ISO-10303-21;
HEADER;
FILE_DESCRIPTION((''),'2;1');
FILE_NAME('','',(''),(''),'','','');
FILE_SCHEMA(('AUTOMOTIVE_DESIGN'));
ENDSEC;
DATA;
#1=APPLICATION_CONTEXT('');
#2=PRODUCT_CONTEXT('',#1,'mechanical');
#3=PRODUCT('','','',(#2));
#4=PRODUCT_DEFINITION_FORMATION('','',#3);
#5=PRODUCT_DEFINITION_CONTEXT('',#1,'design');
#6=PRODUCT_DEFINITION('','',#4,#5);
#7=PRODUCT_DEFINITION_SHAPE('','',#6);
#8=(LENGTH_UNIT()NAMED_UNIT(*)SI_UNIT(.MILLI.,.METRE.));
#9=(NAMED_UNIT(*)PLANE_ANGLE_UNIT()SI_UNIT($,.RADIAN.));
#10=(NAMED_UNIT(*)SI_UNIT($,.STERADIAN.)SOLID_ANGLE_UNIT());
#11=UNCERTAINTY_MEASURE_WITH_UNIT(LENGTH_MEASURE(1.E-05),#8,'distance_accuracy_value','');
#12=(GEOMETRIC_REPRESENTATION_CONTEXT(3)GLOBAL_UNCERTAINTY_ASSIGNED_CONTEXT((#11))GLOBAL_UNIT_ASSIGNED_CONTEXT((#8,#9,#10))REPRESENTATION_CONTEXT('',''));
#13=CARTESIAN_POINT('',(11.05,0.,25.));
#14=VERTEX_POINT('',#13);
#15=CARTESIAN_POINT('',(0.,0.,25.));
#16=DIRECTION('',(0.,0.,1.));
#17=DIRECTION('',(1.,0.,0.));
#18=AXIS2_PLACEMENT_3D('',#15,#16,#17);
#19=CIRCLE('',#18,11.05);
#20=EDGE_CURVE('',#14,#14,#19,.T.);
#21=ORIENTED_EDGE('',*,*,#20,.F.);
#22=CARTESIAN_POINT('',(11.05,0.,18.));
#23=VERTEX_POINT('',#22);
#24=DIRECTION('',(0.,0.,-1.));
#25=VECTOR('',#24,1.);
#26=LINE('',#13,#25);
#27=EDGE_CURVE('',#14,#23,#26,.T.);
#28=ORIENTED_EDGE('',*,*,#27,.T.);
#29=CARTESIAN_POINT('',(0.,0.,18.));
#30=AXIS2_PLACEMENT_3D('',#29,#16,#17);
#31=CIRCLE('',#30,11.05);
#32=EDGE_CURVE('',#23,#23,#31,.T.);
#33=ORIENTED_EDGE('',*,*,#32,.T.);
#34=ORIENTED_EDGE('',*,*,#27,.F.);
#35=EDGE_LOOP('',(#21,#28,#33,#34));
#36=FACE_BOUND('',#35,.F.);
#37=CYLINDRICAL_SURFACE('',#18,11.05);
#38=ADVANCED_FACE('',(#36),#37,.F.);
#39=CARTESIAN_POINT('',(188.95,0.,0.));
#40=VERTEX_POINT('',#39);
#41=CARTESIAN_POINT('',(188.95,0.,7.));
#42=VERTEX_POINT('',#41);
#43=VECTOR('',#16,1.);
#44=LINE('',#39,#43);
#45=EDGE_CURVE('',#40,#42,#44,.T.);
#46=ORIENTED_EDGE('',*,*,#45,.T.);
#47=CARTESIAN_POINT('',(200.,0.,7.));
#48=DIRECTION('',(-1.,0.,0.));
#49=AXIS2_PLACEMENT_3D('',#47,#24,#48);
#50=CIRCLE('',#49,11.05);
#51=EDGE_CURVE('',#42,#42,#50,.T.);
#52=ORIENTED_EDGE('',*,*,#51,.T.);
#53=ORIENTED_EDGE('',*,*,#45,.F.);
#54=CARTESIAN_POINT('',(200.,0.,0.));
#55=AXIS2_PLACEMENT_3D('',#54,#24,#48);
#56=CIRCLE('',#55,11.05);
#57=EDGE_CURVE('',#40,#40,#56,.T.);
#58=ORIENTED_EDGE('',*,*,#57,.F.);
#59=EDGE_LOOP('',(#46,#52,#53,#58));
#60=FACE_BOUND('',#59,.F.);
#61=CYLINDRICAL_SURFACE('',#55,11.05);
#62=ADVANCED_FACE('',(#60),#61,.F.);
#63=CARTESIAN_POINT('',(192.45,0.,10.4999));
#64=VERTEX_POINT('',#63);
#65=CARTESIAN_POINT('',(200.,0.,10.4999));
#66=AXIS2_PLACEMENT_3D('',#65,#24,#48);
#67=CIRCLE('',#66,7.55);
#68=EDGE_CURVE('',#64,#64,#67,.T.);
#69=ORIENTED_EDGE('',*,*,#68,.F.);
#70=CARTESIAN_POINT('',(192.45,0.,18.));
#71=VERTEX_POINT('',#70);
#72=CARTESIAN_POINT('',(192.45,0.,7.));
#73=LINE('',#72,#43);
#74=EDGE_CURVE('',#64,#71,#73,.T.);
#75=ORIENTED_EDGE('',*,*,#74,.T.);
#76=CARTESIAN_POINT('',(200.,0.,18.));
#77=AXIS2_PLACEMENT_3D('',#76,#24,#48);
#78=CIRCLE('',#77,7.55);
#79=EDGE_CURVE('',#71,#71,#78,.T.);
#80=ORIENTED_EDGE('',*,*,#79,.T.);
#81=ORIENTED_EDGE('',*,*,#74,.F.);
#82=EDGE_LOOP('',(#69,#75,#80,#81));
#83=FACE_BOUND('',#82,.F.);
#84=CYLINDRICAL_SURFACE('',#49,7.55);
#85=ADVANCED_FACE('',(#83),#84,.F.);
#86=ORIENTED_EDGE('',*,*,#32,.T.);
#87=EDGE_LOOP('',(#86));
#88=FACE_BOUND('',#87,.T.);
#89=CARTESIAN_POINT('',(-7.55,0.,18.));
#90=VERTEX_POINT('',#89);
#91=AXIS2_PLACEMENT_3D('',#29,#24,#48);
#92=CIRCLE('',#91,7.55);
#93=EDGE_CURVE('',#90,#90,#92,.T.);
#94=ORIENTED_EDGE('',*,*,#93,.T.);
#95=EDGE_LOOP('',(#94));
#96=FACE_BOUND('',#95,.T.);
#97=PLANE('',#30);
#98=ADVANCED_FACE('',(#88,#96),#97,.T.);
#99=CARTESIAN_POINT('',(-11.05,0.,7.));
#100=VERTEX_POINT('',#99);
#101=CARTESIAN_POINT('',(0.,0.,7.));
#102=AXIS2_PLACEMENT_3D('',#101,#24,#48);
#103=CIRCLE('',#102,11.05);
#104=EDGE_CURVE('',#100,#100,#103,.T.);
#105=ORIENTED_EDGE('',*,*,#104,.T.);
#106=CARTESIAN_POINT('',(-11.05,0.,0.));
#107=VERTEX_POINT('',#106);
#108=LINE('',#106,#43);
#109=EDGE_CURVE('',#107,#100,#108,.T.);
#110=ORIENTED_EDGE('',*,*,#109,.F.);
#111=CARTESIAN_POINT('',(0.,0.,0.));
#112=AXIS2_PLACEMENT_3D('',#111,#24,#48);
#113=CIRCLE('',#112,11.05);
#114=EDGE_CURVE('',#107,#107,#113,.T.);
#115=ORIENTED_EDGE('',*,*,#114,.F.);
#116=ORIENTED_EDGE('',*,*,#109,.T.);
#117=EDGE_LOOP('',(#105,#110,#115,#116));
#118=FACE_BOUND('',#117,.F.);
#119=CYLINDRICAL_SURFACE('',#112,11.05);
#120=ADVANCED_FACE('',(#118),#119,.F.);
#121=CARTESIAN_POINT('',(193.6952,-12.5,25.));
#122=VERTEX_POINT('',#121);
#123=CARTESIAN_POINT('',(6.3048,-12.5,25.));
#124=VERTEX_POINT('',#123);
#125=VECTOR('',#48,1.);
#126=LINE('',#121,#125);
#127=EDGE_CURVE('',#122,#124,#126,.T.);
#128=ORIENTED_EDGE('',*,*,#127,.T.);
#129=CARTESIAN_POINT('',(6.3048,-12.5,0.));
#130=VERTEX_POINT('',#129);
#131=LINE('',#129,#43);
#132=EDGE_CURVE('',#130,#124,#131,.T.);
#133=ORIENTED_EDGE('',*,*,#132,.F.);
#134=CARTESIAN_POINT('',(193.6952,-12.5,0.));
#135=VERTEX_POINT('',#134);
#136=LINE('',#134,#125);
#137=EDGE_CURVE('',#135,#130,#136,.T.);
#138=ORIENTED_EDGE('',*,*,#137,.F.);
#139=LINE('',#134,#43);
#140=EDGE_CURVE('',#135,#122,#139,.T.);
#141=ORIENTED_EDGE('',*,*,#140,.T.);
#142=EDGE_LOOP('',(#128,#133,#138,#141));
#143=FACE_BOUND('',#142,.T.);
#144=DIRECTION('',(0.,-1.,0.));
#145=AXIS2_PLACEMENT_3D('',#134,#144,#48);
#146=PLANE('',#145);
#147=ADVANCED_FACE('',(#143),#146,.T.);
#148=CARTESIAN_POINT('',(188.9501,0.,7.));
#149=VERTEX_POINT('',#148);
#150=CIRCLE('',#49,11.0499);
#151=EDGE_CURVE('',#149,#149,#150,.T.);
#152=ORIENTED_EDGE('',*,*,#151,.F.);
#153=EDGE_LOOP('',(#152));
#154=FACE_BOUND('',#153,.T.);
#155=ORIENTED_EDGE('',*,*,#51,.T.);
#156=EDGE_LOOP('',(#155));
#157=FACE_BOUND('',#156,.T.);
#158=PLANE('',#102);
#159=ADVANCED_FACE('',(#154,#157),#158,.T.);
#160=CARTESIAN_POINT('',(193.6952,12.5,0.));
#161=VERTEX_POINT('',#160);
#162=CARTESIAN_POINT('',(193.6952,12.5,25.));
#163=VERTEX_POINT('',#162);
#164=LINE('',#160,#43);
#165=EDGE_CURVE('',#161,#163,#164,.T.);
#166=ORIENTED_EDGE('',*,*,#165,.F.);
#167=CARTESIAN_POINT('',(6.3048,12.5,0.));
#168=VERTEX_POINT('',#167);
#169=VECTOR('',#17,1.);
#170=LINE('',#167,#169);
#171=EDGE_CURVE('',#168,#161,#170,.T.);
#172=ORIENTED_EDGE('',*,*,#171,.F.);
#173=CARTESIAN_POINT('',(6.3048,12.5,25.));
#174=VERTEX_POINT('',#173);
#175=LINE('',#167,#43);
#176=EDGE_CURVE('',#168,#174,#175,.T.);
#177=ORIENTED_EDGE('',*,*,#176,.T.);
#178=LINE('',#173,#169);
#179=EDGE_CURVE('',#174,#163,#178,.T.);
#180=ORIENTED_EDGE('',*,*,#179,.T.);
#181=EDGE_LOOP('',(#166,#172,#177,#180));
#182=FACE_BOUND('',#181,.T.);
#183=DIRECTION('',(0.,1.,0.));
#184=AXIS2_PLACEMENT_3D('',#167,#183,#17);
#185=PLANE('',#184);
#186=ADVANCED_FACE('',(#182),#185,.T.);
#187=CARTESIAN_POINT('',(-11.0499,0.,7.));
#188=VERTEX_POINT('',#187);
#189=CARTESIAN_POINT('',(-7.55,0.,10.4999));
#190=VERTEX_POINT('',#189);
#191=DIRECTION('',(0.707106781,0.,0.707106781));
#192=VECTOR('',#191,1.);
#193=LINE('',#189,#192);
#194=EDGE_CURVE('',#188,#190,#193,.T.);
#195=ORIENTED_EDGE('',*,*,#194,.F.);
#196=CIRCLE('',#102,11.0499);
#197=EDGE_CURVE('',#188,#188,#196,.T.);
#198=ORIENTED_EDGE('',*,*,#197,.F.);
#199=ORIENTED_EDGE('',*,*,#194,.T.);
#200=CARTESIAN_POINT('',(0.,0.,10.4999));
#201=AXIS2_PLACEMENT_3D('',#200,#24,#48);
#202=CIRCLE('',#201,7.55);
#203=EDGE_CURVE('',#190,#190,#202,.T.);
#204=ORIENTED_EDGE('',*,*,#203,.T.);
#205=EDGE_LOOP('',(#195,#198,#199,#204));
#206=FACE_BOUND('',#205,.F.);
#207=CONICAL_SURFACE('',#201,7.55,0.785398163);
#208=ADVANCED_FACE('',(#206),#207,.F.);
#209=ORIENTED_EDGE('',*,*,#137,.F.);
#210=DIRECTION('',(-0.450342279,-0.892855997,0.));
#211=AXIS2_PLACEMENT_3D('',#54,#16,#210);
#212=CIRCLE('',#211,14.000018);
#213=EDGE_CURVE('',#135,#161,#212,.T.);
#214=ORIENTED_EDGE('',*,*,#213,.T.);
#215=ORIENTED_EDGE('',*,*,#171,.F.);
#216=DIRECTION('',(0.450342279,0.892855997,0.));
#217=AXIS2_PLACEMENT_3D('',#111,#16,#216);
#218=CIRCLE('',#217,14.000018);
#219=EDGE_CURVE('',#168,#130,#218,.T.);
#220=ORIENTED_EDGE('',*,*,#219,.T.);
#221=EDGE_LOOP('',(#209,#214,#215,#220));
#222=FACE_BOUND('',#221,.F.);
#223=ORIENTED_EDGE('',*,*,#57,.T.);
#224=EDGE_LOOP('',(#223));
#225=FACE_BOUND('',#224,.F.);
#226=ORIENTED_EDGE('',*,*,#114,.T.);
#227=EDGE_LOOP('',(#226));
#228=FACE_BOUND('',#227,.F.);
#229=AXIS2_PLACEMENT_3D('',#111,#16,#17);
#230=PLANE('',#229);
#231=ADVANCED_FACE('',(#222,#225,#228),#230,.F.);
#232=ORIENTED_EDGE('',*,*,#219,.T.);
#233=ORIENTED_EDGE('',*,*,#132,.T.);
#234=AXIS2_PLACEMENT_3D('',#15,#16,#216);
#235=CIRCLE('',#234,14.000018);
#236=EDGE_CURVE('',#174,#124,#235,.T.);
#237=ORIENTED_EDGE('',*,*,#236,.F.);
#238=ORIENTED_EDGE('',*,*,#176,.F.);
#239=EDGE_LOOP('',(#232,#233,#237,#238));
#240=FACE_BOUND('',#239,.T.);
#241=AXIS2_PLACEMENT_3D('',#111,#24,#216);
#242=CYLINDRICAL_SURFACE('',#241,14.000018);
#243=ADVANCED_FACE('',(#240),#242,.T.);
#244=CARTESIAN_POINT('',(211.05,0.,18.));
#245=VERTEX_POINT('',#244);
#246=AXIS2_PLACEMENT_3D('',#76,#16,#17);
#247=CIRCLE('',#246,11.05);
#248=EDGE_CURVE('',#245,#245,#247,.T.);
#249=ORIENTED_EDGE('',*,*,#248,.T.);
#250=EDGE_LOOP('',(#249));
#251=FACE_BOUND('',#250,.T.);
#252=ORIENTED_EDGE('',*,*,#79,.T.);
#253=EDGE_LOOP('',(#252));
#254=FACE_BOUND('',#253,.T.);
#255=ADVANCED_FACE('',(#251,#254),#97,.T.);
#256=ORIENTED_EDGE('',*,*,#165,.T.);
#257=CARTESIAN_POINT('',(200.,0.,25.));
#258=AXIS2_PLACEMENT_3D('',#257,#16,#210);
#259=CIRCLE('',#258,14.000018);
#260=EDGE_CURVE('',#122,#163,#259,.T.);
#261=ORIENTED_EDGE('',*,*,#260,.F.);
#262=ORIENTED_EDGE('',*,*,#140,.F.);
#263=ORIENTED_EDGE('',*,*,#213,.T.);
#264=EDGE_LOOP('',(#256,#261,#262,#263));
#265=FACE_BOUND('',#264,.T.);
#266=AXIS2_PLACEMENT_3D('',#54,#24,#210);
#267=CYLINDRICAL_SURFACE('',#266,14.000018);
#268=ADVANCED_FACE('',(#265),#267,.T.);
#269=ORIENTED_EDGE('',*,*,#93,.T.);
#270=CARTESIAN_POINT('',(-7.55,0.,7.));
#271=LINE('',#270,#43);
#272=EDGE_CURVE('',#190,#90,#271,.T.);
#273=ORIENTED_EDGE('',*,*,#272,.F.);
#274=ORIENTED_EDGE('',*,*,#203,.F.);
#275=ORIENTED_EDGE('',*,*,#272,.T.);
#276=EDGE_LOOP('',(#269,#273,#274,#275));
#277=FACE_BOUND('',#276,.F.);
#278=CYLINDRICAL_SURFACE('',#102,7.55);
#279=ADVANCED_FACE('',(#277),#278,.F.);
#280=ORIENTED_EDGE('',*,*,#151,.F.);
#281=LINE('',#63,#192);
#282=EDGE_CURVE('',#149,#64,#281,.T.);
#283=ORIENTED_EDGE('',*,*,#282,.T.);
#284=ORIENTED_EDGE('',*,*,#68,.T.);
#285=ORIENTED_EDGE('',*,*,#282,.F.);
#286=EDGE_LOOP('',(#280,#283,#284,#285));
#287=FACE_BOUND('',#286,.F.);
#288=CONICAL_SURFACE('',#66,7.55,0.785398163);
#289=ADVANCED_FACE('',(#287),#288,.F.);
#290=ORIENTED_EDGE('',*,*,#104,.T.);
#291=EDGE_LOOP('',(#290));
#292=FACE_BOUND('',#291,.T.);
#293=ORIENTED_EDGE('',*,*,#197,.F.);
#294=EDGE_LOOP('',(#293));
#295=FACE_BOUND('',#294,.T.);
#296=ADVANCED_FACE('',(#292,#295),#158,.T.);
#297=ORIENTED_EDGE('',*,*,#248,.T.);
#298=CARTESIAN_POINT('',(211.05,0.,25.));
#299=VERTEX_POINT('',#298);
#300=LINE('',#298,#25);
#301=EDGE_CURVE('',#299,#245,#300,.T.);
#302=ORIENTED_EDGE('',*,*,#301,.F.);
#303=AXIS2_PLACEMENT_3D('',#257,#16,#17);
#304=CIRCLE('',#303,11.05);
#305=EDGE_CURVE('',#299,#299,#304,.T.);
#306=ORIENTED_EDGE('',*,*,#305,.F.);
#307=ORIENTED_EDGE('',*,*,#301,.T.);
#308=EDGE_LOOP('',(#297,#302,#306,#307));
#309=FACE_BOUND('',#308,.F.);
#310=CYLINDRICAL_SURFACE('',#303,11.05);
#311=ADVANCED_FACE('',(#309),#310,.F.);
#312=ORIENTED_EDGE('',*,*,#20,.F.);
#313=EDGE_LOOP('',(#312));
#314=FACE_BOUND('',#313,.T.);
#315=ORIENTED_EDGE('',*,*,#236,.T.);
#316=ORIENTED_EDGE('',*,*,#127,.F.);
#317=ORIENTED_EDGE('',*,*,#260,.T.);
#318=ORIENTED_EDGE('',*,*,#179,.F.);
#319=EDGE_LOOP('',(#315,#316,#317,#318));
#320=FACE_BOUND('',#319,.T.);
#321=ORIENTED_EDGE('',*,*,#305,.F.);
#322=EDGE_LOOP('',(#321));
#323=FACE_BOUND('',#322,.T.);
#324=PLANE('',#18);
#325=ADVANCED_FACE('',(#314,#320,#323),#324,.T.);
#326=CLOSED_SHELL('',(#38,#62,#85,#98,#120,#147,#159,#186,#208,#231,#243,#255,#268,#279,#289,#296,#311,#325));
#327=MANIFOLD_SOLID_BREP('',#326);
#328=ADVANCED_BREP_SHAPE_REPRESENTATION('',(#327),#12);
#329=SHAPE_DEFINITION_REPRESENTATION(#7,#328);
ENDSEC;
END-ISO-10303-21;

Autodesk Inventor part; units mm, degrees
ref_plane "YZ Plane" through (0, 0, 0) normal (1, 0, 0) x (0, 1, 0)
ref_plane "XZ Plane" through (0, 0, 0) normal (0, 1, 0) x (-1, 0, 0)
ref_plane "XY Plane" through (0, 0, 0) normal (0, 0, 1) x (1, 0, 0)
sketch "Sketch1" plane through (0, 0, 0) normal (0, 0, 1) x (1, 0, 0)
  arc A0 (6.3048, 12.5) -> (6.3048, -12.5) centre (0, 0) ccw
  arc A1 (193.6952, -12.5) -> (193.6952, 12.5) centre (200, 0) ccw
  line L0 (6.3048, 12.5) -> (193.6952, 12.5)
  line L1 (193.6952, -12.5) -> (6.3048, -12.5)
  dimension "d0" = 25
  dimension "d2" = 14
  dimension "d3" = 200
extrude "Extrusion1" add sketch "Sketch1" along normal blind 25
sketch "Sketch2" plane through (0, 0, 25) normal (0, 0, 1) x (1, 0, 0)
  arc A0 (6.3048, 12.5) -> (6.3048, -12.5) centre (0, 0) ccw projected
  arc A1 (193.6952, -12.5) -> (193.6952, 12.5) centre (200, 0) ccw projected
  circle A2 centre (0, 0) radius 11.05
  circle A3 centre (200, 0) radius 11.05
  dimension "d6" = 22.1
extrude "Extrusion2" cut sketch "Sketch2" against normal blind 7
sketch "Sketch3" plane through (0, 0, 0) normal (0, 0, -1) x (-1, 0, 0)
  circle A0 centre (-200, 0) radius 11.05 projected
  circle A1 centre (0, 0) radius 11.05 projected
extrude "Extrusion3" cut sketch "Sketch3" against normal blind 7
sketch "Sketch4" plane through (200, 0, 7) normal (0, 0, -1) x (-1, 0, 0)
  circle A0 centre (0, 0) radius 11.05 projected
  circle A1 centre (200, 0) radius 11.05 projected
  circle A2 centre (0, 0) radius 7.55
  circle A3 centre (200, 0) radius 7.55
  dimension "d12" = 15.1
extrude "Extrusion4" cut sketch "Sketch4" against normal through all contours A2 | A3
chamfer "Chamfer1" distance 3.5 angle 45 2 edges at (207.55, 0, 7) (7.55, 0, 7)
properties part number "ARM"
